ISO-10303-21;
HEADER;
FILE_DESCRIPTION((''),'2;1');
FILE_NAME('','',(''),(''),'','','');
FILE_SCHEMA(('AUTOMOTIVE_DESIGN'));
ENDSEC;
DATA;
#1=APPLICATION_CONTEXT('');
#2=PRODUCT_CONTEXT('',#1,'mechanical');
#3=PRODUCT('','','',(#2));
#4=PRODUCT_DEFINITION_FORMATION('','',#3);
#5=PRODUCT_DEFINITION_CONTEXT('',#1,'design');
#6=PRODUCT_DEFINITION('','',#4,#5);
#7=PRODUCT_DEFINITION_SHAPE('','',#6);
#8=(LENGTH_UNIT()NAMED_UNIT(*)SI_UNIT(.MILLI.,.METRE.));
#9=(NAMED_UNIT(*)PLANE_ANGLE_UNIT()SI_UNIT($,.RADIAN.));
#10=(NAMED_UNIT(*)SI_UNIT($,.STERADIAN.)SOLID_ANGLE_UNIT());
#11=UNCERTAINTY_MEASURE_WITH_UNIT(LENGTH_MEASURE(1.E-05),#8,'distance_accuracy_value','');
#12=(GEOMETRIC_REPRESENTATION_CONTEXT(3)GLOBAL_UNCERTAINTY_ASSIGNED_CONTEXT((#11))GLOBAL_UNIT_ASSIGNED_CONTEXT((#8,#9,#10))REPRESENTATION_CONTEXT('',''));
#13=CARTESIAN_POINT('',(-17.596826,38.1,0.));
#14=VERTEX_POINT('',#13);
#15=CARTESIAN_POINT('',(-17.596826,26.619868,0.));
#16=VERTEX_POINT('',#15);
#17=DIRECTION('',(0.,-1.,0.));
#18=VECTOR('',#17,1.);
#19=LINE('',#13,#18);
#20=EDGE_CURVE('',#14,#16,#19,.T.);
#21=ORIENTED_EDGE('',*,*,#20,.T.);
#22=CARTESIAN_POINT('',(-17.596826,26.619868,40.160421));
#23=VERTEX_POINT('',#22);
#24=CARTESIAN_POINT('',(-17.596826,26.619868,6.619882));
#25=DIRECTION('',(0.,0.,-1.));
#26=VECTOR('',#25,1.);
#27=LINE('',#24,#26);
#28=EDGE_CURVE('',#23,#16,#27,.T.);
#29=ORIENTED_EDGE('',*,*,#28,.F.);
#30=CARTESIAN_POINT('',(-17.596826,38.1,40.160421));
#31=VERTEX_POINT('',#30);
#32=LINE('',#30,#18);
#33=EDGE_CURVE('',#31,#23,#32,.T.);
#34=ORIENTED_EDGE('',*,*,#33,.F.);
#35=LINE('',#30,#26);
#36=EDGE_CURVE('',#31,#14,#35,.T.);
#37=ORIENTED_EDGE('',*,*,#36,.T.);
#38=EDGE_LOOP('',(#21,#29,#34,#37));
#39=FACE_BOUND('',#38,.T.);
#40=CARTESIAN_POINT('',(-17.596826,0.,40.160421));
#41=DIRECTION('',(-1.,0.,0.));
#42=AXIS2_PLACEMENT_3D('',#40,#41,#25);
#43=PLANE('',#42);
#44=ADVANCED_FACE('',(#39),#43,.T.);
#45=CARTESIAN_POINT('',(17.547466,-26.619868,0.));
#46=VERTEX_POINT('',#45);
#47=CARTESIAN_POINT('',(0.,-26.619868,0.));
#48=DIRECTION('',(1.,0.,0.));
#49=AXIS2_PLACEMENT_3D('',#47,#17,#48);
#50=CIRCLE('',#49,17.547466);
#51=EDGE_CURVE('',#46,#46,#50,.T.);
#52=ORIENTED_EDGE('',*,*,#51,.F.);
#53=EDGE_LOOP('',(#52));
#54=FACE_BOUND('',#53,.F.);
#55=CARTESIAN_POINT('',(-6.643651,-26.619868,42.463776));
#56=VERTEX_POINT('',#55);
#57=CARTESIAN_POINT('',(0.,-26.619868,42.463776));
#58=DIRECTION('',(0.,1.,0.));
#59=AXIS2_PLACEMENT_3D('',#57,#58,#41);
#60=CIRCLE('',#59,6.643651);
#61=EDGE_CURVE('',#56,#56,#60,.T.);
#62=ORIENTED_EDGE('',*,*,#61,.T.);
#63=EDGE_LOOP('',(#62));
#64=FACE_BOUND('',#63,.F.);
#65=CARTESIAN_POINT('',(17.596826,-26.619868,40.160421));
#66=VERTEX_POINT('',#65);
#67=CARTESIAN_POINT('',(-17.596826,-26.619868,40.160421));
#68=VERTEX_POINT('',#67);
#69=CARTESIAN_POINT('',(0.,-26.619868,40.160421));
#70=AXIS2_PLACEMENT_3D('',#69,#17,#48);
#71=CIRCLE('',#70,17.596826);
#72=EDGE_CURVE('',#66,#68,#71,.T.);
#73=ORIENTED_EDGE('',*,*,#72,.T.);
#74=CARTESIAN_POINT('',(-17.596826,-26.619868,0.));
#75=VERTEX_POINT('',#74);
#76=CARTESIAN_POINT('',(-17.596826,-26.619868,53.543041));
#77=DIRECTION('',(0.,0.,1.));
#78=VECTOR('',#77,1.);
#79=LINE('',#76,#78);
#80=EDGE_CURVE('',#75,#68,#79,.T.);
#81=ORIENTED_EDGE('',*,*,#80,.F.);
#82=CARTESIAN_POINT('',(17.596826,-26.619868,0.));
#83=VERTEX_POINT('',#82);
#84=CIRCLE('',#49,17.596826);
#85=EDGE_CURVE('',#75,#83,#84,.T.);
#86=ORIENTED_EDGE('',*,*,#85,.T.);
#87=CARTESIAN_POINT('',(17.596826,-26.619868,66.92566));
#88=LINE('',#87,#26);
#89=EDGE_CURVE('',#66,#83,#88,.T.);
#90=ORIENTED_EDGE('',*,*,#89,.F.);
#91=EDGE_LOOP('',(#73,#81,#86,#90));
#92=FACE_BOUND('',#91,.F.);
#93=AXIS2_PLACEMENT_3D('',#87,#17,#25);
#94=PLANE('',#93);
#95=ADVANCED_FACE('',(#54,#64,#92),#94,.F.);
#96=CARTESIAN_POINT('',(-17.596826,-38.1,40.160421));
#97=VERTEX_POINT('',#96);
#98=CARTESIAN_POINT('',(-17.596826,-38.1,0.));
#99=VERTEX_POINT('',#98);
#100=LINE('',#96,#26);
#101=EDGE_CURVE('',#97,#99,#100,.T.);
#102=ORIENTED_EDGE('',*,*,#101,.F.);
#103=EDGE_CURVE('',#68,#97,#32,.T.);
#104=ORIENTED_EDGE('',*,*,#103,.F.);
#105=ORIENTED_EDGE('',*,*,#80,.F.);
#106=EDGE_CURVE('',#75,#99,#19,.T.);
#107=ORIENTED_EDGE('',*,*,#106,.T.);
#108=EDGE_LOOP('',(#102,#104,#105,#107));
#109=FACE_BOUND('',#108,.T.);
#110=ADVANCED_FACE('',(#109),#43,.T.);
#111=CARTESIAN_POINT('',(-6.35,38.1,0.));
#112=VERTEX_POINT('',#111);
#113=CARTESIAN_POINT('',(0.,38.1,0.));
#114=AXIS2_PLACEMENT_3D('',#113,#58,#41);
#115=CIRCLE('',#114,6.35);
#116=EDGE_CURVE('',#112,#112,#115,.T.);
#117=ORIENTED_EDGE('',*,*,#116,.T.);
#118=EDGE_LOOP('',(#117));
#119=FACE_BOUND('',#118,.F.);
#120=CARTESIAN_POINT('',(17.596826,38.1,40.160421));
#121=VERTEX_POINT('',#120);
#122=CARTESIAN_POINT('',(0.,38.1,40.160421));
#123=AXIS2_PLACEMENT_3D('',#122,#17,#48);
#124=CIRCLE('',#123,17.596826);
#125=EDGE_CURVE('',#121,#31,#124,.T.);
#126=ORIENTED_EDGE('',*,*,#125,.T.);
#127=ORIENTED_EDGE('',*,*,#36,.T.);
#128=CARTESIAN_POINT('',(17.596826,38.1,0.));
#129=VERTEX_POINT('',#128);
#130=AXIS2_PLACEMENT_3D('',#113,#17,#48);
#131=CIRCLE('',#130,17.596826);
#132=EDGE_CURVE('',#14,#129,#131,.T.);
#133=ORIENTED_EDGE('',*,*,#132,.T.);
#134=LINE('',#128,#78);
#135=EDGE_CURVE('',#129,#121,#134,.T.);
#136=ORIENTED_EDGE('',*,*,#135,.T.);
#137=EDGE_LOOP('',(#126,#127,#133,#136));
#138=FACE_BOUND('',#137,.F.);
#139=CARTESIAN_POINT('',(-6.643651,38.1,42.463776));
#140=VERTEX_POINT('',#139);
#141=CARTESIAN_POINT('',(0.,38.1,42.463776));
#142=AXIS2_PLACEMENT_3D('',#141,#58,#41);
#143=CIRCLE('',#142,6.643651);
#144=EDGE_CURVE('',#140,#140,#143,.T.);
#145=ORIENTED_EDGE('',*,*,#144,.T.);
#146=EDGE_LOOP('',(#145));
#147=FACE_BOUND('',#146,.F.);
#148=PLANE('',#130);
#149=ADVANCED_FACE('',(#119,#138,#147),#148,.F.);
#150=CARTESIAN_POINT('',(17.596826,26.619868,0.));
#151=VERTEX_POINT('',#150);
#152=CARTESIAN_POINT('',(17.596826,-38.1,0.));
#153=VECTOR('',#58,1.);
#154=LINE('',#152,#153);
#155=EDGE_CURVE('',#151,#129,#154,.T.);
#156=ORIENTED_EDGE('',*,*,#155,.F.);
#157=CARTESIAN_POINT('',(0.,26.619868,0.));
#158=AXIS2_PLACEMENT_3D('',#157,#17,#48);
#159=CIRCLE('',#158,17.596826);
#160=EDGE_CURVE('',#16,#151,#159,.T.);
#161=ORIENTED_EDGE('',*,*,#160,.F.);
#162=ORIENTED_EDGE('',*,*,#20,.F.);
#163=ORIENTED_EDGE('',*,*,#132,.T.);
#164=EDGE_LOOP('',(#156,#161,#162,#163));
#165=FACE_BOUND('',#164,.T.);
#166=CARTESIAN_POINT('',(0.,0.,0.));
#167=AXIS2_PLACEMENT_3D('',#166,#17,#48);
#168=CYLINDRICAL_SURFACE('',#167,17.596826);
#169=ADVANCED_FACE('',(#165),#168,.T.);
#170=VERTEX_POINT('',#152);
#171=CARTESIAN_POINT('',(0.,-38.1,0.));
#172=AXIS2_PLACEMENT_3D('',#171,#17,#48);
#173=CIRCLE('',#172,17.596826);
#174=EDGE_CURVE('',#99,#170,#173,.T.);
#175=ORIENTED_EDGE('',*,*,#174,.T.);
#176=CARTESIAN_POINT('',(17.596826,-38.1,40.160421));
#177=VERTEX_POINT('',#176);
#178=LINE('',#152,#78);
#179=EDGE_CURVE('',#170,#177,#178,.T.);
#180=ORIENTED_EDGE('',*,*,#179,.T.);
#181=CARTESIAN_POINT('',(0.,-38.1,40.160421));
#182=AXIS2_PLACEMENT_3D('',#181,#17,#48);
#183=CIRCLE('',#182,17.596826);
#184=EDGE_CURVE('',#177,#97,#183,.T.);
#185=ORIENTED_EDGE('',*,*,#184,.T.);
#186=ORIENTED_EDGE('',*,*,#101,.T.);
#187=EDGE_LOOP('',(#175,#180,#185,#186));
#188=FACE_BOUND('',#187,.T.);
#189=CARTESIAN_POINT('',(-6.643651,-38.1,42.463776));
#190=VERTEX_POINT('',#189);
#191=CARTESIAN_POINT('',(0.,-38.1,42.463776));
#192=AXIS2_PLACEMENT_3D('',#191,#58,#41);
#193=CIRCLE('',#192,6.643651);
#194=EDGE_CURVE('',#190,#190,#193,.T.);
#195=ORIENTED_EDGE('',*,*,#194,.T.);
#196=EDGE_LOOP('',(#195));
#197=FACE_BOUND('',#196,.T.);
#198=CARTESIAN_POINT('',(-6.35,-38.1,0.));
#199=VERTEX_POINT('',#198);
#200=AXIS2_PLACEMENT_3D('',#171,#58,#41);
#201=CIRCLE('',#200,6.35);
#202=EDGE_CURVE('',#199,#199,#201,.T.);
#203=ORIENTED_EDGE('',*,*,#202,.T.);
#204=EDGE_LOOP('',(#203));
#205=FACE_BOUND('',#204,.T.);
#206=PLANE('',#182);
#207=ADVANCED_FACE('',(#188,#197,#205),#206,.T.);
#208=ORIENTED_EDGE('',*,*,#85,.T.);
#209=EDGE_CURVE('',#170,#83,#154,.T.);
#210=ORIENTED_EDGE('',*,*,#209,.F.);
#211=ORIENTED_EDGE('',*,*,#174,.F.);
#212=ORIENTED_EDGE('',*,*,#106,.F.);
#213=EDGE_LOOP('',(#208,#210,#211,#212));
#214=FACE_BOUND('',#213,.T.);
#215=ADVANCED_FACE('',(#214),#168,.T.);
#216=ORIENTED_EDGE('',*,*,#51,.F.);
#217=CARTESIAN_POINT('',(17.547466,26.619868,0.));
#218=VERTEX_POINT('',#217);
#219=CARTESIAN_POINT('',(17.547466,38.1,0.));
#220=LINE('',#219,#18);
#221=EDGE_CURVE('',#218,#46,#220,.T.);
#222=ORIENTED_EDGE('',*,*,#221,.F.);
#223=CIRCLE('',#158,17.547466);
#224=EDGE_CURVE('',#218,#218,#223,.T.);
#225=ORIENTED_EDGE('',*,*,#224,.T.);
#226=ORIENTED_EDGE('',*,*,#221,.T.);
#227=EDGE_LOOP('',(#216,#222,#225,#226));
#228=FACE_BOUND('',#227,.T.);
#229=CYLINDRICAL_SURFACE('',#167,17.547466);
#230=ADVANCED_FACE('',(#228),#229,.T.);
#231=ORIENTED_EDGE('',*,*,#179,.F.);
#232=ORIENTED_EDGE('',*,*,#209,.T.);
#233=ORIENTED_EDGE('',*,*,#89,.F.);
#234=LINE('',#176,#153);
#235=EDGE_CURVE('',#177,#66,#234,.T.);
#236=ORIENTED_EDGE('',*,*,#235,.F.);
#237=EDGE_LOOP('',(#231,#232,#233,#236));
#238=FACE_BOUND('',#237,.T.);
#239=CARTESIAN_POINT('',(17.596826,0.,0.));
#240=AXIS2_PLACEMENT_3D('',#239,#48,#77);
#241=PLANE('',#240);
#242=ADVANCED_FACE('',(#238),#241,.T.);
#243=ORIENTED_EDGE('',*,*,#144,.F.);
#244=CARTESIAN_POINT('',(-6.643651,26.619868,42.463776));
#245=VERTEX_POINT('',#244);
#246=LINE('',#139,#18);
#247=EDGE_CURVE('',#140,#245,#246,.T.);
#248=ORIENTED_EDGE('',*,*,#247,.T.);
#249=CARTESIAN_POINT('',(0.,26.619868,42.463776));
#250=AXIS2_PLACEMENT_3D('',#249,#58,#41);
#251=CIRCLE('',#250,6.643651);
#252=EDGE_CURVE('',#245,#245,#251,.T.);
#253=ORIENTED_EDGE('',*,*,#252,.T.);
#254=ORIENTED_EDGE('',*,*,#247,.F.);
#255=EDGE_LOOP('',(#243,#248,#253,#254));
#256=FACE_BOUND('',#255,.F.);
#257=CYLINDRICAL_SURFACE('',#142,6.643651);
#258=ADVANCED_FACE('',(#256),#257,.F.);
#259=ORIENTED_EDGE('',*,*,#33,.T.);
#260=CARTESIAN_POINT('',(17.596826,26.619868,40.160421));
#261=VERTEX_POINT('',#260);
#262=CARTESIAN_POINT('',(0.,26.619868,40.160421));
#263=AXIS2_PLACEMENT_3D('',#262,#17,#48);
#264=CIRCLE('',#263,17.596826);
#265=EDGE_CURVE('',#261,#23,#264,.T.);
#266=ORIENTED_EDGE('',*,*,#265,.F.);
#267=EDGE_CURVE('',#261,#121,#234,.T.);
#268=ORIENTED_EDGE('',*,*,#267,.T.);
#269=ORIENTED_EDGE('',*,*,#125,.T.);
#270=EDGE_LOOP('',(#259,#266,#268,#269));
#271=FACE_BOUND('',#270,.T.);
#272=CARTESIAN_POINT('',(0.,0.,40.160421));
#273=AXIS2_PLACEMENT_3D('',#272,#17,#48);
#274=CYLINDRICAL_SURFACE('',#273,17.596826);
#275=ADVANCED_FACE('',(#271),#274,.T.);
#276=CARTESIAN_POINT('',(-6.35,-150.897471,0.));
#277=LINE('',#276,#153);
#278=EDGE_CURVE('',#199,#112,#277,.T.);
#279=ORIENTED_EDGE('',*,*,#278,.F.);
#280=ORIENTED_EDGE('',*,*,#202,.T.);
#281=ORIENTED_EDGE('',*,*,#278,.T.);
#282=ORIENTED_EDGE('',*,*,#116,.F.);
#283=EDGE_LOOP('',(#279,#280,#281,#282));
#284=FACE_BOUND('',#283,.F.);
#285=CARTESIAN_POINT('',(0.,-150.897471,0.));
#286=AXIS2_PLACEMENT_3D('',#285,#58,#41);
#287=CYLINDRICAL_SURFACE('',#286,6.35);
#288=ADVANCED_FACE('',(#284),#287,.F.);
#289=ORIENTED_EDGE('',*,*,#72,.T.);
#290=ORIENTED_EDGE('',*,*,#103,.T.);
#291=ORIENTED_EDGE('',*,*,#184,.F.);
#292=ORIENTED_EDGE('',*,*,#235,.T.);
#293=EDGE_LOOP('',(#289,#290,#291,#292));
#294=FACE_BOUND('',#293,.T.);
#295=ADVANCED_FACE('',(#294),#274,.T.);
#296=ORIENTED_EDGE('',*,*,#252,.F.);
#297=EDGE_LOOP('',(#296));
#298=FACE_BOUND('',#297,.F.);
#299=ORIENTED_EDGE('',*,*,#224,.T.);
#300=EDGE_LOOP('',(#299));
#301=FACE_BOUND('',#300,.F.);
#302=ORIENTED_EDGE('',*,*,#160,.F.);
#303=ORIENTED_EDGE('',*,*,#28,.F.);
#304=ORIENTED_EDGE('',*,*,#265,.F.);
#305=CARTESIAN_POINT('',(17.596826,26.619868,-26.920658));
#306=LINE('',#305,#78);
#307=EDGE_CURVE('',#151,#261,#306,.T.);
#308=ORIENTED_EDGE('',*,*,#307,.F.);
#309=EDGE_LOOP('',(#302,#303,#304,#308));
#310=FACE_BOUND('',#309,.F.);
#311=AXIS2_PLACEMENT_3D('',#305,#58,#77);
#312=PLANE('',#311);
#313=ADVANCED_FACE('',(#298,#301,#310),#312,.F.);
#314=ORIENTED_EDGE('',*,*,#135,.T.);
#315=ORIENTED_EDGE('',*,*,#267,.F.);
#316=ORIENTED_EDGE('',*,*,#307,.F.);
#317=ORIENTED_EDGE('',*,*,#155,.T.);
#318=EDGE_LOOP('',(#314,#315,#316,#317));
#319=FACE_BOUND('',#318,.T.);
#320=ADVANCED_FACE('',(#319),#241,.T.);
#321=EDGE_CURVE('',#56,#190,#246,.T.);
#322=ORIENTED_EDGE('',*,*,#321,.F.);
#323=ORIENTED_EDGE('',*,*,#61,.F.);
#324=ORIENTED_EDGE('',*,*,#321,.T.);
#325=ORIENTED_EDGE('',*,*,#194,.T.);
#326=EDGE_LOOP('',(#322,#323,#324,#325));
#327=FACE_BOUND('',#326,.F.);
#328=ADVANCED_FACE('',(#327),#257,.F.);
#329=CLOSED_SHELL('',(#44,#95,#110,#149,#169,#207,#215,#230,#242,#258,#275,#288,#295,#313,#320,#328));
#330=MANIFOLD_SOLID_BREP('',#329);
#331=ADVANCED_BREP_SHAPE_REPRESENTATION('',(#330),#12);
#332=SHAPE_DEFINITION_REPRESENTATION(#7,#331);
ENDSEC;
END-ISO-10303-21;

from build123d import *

# Parameters (mm, degrees)
F1_DEPTH  = 38.1
F2_W      = 53.239736706
F2_H      = 40.1604212821
F3_DEPTH  = 50.8
F4_R      = 17.5474664262
F5_DEPTH  = 38.1
F9_D      = 12.7
F10_R     = 6.6436508829
F11_DEPTH = 127


# Not quite as in the source:
# - a feature of the source that left no trace in its solid (it failed there, or was rolled back) is left out


with BuildPart() as f1:
    # F0 (on Front) → F1 (new body, symmetric)
    with BuildSketch(Plane.XZ):
        with BuildLine():
            ThreePointArc((-17.5968260456, 40.1604212821), (0, 22.5635952364), (17.5968260456, 40.1604212821))
            ThreePointArc((17.5968260456, 40.1604212821), (0, 57.7572473277), (-17.5968260456, 40.1604212821))
        make_face()
        with BuildLine():
            ThreePointArc((-17.5968260456, 0), (0, -17.5968260456), (17.5968260456, 0))
            ThreePointArc((17.5968260456, 0), (0, 17.5968260456), (-17.5968260456, 0))
        make_face()
        with BuildLine():
            ThreePointArc((-17.5968260456, 0), (0, 17.5968260456), (17.5968260456, 0))
            Line((17.5968260456, 0), (17.5968260456, 40.1604212821))
            ThreePointArc((17.5968260456, 40.1604212821), (0, 22.5635952364), (-17.5968260456, 40.1604212821))
            Line((-17.5968260456, 40.1604212821), (-17.5968260456, 0))
        make_face()
    extrude(amount=F1_DEPTH, both=True)

    # F2 (on face) → F3 (cut)
    with BuildSketch(Plane.YZ.offset(17.5968260456)):
        Polygon((0, 66.9256597757), (-26.619868353, 66.9256597757), (-26.619868353, 40.1604212821), (26.619868353, 40.1604212821), (26.619868353, 66.9256597757), align=None)
        with Locations((0, 20.080210641)):
            Rectangle(F2_W, F2_H)
        Polygon((26.619868353, 0), (-26.619868353, 0), (-26.619868353, -26.9206576049), (0, -26.9206576049), (26.619868353, -26.9206576049), align=None)
    extrude(amount=-F3_DEPTH, mode=Mode.SUBTRACT)

    # F4 (on Front) → F5 (join, symmetric)
    with BuildSketch(Plane.XZ):
        Circle(F4_R)
    extrude(amount=F5_DEPTH, both=True)

    # F9 (through all)
    with Locations(Plane.XZ.offset(38.1)):
        with Locations((0, 0)):
            Hole(F9_D / 2)

    # F10 (on face) → F11 (cut)
    with BuildSketch(Plane(origin=(0, 38.1, 0), x_dir=(-1, 0, 0), z_dir=(0, 1, 0))):
        with Locations((0, 42.4637757242)):
            Circle(F10_R)
    extrude(amount=-F11_DEPTH, mode=Mode.SUBTRACT)


solid = f1.part
